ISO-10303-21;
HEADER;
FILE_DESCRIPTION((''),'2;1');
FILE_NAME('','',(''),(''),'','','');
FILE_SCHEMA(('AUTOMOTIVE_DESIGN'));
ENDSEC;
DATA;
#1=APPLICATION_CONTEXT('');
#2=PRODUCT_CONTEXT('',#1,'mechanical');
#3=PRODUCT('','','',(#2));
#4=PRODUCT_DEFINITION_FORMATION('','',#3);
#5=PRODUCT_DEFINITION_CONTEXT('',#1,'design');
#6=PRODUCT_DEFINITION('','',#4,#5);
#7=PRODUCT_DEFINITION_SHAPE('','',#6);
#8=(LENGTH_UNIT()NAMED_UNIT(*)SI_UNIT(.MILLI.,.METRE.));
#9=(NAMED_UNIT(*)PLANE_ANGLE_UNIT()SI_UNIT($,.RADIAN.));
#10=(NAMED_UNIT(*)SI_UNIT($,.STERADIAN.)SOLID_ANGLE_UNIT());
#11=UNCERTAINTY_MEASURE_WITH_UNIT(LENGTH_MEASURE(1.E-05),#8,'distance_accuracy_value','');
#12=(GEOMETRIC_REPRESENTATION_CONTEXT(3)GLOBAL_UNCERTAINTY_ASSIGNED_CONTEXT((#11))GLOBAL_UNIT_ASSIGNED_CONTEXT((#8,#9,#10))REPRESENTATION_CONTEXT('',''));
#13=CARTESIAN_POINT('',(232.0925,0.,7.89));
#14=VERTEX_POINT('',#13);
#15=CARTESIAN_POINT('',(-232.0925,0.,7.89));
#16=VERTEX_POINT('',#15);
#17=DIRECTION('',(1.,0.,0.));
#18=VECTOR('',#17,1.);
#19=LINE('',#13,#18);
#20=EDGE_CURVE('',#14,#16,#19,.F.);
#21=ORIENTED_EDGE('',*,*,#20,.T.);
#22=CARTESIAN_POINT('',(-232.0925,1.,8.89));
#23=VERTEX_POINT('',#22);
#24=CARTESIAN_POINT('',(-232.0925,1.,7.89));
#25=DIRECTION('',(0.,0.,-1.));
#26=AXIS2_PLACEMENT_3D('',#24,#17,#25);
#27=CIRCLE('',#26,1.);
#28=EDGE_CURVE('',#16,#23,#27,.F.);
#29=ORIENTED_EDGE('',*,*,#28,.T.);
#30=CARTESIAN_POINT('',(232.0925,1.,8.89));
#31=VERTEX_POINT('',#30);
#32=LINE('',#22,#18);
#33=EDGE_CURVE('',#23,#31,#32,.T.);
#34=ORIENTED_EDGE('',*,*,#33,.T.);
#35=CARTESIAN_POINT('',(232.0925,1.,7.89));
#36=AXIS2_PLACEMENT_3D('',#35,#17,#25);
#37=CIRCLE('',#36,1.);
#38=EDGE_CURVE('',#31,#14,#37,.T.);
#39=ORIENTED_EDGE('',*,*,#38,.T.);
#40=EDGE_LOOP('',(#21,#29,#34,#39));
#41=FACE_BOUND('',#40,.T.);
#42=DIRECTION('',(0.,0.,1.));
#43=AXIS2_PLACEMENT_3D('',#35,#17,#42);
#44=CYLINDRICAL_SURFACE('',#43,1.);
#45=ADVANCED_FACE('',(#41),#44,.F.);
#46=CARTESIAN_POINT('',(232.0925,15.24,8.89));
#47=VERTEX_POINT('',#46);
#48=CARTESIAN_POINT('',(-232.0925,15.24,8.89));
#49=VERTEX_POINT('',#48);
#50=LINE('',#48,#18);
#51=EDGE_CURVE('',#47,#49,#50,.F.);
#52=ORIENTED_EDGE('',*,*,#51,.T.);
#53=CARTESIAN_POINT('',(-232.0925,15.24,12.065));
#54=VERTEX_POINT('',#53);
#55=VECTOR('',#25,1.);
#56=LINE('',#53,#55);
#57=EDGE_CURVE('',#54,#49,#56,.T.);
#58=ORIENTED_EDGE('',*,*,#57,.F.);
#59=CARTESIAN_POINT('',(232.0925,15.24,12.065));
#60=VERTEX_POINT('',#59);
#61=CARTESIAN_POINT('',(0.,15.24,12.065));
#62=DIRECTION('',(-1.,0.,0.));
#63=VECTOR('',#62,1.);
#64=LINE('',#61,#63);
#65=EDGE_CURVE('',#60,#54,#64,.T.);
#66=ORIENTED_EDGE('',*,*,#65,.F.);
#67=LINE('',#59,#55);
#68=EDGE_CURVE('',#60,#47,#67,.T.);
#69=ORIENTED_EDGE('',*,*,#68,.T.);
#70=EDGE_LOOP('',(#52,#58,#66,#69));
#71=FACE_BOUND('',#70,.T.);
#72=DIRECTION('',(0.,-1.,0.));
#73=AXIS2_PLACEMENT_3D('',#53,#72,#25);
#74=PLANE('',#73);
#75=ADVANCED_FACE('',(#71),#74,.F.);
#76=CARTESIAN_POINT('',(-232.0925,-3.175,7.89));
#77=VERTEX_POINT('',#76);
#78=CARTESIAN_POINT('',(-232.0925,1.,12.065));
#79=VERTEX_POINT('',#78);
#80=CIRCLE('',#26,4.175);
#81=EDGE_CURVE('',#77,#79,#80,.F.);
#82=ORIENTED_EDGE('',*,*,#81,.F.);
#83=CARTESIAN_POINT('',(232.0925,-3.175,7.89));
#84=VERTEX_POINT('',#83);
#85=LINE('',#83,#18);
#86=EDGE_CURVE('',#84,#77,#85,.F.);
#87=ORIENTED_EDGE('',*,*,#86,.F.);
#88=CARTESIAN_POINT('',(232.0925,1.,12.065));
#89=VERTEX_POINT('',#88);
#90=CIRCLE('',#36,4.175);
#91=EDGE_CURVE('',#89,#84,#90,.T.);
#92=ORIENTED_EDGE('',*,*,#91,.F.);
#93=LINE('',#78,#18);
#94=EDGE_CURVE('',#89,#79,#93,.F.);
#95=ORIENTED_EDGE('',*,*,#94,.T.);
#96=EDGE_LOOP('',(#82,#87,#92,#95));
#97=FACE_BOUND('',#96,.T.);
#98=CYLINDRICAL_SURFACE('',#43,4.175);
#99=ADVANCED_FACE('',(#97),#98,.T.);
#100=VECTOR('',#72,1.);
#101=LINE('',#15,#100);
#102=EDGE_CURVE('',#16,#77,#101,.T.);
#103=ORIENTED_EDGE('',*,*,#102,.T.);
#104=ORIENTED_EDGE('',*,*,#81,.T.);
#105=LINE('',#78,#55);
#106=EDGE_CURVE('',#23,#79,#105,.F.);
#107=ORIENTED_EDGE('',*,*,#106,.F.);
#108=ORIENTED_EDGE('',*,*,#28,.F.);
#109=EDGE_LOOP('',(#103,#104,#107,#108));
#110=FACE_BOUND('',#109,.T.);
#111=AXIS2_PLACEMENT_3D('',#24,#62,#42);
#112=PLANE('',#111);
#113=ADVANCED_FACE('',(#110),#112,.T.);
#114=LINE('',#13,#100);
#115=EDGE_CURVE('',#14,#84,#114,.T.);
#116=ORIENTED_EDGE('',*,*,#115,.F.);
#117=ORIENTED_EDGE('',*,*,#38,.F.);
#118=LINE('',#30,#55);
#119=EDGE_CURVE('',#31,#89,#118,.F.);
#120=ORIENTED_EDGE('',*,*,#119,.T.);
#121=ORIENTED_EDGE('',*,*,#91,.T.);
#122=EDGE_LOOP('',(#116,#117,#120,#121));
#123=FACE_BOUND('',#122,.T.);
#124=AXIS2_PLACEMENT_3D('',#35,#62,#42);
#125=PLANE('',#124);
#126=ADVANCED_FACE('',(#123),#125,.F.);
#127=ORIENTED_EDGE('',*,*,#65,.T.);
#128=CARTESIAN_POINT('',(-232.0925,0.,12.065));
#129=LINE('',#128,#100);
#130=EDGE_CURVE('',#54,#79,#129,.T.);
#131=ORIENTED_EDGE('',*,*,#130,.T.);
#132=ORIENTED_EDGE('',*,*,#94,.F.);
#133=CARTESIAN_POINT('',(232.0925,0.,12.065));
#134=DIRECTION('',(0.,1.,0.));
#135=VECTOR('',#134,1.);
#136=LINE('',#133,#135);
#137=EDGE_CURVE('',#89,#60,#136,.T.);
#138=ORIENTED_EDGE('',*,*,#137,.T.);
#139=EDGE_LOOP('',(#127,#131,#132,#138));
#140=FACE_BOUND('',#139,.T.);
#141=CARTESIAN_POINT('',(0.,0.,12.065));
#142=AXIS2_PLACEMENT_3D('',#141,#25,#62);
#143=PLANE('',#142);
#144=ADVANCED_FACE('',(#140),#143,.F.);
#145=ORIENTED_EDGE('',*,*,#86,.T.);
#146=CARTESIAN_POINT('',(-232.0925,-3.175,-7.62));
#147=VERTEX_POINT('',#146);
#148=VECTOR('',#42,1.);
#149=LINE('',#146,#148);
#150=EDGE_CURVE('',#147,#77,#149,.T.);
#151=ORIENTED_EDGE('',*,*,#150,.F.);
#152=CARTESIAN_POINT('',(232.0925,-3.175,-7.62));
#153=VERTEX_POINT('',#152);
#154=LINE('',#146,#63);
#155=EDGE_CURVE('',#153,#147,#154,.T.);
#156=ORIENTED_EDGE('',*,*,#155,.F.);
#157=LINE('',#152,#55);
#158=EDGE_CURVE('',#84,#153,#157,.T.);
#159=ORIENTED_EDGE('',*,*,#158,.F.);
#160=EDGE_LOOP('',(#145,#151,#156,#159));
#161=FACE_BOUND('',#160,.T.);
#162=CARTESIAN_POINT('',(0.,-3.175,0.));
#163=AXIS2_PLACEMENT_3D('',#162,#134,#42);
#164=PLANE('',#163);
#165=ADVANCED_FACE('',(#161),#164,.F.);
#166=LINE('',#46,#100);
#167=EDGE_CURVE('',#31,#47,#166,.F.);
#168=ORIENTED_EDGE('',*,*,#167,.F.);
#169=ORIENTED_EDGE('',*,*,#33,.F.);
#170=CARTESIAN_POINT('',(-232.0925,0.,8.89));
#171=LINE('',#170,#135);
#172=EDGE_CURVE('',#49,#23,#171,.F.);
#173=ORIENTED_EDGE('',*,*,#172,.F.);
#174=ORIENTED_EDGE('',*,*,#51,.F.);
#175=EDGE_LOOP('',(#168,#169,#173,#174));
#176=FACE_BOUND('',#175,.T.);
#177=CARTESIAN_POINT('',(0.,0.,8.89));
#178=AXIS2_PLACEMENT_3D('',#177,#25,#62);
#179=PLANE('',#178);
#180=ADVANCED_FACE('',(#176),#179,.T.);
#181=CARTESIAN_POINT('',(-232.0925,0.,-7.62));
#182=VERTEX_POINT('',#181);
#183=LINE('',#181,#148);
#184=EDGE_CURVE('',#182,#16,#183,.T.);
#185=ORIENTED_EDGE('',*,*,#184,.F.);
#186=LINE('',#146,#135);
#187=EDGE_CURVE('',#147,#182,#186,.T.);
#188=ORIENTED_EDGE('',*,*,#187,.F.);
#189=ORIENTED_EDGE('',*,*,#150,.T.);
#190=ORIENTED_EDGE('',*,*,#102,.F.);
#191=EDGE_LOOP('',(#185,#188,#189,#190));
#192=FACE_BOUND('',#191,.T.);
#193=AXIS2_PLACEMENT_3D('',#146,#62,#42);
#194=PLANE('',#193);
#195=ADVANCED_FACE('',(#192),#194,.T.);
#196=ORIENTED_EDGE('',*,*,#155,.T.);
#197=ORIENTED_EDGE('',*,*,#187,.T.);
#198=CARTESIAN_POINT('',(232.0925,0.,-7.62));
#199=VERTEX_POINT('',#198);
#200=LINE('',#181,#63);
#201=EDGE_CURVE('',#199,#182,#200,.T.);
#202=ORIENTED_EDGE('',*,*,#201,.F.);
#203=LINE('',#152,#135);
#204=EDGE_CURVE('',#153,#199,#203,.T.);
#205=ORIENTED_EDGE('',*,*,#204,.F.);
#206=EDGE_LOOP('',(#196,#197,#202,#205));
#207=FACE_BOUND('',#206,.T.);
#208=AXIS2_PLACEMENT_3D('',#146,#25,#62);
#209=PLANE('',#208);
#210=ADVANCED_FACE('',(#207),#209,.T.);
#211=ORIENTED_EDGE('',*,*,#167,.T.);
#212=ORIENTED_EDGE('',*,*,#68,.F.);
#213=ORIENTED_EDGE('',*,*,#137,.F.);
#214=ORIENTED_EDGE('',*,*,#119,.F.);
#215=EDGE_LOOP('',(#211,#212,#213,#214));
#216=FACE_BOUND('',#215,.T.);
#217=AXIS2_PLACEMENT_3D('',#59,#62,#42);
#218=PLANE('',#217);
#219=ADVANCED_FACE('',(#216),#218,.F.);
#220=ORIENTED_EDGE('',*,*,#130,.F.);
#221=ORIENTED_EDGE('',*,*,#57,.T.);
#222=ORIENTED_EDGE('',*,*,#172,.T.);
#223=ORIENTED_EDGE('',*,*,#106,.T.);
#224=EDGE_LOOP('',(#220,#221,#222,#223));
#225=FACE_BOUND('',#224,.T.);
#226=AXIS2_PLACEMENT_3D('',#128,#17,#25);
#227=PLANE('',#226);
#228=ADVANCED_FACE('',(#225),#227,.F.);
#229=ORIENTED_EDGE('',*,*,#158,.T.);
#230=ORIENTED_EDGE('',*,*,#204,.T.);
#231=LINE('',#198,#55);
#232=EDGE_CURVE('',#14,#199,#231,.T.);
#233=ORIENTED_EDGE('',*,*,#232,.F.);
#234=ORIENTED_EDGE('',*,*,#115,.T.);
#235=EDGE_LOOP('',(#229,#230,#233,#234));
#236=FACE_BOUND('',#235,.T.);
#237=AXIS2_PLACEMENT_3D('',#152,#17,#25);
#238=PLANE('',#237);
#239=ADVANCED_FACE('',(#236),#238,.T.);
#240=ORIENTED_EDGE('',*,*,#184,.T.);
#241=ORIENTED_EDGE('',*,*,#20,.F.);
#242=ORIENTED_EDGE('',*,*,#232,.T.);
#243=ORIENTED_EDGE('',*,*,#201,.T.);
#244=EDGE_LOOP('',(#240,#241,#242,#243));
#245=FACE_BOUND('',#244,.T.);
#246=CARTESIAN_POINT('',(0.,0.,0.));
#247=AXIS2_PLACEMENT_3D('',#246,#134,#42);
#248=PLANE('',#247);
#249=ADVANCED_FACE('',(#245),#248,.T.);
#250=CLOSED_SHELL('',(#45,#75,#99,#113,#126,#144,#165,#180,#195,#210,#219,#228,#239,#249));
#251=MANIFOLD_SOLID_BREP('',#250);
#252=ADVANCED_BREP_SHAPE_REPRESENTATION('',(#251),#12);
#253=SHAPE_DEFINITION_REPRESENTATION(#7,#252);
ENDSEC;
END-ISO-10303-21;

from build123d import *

# Parameters (mm, degrees)
SKETCH1_W          = 464.185
SKETCH1_H          = 15.24
BASE_FLANGE1_DEPTH = 3.175
EDGE_FLANGE1_DEPTH = 464.185


# Sheet-metal steps are written as plain solids
with BuildPart() as part:
    # Sketch1 → Base-Flange1 (new body)
    with BuildSketch(Plane(origin=(0, 0, 0), x_dir=(1, 0, 0), z_dir=(0, 1, 0))):
        Rectangle(SKETCH1_W, SKETCH1_H)
    extrude(amount=-BASE_FLANGE1_DEPTH)

    # Edge-Flange1 section (across the edge) → Edge-Flange1 (add)
    with BuildSketch(Plane(origin=(-232.0925, 0, 8.89), x_dir=(0, 0, -1), z_dir=(1, 0, 0))):
        with BuildLine():
            Line((-3.175, 1), (-3.175, 15.24))
            Line((-3.175, 15.24), (0, 15.24))
            Line((0, 15.24), (0, 1))
            ThreePointArc((0, 1), (0.292893219, 0.292893219), (1, 0))
            Line((1, 0), (1.27, 0))
            Line((1.27, 0), (1.27, -3.175))
            Line((1.27, -3.175), (1, -3.175))
            ThreePointArc((1, -3.175), (-1.952170811, -1.952170811), (-3.175, 1))
        make_face()
    extrude(amount=EDGE_FLANGE1_DEPTH)


solid = part.part
